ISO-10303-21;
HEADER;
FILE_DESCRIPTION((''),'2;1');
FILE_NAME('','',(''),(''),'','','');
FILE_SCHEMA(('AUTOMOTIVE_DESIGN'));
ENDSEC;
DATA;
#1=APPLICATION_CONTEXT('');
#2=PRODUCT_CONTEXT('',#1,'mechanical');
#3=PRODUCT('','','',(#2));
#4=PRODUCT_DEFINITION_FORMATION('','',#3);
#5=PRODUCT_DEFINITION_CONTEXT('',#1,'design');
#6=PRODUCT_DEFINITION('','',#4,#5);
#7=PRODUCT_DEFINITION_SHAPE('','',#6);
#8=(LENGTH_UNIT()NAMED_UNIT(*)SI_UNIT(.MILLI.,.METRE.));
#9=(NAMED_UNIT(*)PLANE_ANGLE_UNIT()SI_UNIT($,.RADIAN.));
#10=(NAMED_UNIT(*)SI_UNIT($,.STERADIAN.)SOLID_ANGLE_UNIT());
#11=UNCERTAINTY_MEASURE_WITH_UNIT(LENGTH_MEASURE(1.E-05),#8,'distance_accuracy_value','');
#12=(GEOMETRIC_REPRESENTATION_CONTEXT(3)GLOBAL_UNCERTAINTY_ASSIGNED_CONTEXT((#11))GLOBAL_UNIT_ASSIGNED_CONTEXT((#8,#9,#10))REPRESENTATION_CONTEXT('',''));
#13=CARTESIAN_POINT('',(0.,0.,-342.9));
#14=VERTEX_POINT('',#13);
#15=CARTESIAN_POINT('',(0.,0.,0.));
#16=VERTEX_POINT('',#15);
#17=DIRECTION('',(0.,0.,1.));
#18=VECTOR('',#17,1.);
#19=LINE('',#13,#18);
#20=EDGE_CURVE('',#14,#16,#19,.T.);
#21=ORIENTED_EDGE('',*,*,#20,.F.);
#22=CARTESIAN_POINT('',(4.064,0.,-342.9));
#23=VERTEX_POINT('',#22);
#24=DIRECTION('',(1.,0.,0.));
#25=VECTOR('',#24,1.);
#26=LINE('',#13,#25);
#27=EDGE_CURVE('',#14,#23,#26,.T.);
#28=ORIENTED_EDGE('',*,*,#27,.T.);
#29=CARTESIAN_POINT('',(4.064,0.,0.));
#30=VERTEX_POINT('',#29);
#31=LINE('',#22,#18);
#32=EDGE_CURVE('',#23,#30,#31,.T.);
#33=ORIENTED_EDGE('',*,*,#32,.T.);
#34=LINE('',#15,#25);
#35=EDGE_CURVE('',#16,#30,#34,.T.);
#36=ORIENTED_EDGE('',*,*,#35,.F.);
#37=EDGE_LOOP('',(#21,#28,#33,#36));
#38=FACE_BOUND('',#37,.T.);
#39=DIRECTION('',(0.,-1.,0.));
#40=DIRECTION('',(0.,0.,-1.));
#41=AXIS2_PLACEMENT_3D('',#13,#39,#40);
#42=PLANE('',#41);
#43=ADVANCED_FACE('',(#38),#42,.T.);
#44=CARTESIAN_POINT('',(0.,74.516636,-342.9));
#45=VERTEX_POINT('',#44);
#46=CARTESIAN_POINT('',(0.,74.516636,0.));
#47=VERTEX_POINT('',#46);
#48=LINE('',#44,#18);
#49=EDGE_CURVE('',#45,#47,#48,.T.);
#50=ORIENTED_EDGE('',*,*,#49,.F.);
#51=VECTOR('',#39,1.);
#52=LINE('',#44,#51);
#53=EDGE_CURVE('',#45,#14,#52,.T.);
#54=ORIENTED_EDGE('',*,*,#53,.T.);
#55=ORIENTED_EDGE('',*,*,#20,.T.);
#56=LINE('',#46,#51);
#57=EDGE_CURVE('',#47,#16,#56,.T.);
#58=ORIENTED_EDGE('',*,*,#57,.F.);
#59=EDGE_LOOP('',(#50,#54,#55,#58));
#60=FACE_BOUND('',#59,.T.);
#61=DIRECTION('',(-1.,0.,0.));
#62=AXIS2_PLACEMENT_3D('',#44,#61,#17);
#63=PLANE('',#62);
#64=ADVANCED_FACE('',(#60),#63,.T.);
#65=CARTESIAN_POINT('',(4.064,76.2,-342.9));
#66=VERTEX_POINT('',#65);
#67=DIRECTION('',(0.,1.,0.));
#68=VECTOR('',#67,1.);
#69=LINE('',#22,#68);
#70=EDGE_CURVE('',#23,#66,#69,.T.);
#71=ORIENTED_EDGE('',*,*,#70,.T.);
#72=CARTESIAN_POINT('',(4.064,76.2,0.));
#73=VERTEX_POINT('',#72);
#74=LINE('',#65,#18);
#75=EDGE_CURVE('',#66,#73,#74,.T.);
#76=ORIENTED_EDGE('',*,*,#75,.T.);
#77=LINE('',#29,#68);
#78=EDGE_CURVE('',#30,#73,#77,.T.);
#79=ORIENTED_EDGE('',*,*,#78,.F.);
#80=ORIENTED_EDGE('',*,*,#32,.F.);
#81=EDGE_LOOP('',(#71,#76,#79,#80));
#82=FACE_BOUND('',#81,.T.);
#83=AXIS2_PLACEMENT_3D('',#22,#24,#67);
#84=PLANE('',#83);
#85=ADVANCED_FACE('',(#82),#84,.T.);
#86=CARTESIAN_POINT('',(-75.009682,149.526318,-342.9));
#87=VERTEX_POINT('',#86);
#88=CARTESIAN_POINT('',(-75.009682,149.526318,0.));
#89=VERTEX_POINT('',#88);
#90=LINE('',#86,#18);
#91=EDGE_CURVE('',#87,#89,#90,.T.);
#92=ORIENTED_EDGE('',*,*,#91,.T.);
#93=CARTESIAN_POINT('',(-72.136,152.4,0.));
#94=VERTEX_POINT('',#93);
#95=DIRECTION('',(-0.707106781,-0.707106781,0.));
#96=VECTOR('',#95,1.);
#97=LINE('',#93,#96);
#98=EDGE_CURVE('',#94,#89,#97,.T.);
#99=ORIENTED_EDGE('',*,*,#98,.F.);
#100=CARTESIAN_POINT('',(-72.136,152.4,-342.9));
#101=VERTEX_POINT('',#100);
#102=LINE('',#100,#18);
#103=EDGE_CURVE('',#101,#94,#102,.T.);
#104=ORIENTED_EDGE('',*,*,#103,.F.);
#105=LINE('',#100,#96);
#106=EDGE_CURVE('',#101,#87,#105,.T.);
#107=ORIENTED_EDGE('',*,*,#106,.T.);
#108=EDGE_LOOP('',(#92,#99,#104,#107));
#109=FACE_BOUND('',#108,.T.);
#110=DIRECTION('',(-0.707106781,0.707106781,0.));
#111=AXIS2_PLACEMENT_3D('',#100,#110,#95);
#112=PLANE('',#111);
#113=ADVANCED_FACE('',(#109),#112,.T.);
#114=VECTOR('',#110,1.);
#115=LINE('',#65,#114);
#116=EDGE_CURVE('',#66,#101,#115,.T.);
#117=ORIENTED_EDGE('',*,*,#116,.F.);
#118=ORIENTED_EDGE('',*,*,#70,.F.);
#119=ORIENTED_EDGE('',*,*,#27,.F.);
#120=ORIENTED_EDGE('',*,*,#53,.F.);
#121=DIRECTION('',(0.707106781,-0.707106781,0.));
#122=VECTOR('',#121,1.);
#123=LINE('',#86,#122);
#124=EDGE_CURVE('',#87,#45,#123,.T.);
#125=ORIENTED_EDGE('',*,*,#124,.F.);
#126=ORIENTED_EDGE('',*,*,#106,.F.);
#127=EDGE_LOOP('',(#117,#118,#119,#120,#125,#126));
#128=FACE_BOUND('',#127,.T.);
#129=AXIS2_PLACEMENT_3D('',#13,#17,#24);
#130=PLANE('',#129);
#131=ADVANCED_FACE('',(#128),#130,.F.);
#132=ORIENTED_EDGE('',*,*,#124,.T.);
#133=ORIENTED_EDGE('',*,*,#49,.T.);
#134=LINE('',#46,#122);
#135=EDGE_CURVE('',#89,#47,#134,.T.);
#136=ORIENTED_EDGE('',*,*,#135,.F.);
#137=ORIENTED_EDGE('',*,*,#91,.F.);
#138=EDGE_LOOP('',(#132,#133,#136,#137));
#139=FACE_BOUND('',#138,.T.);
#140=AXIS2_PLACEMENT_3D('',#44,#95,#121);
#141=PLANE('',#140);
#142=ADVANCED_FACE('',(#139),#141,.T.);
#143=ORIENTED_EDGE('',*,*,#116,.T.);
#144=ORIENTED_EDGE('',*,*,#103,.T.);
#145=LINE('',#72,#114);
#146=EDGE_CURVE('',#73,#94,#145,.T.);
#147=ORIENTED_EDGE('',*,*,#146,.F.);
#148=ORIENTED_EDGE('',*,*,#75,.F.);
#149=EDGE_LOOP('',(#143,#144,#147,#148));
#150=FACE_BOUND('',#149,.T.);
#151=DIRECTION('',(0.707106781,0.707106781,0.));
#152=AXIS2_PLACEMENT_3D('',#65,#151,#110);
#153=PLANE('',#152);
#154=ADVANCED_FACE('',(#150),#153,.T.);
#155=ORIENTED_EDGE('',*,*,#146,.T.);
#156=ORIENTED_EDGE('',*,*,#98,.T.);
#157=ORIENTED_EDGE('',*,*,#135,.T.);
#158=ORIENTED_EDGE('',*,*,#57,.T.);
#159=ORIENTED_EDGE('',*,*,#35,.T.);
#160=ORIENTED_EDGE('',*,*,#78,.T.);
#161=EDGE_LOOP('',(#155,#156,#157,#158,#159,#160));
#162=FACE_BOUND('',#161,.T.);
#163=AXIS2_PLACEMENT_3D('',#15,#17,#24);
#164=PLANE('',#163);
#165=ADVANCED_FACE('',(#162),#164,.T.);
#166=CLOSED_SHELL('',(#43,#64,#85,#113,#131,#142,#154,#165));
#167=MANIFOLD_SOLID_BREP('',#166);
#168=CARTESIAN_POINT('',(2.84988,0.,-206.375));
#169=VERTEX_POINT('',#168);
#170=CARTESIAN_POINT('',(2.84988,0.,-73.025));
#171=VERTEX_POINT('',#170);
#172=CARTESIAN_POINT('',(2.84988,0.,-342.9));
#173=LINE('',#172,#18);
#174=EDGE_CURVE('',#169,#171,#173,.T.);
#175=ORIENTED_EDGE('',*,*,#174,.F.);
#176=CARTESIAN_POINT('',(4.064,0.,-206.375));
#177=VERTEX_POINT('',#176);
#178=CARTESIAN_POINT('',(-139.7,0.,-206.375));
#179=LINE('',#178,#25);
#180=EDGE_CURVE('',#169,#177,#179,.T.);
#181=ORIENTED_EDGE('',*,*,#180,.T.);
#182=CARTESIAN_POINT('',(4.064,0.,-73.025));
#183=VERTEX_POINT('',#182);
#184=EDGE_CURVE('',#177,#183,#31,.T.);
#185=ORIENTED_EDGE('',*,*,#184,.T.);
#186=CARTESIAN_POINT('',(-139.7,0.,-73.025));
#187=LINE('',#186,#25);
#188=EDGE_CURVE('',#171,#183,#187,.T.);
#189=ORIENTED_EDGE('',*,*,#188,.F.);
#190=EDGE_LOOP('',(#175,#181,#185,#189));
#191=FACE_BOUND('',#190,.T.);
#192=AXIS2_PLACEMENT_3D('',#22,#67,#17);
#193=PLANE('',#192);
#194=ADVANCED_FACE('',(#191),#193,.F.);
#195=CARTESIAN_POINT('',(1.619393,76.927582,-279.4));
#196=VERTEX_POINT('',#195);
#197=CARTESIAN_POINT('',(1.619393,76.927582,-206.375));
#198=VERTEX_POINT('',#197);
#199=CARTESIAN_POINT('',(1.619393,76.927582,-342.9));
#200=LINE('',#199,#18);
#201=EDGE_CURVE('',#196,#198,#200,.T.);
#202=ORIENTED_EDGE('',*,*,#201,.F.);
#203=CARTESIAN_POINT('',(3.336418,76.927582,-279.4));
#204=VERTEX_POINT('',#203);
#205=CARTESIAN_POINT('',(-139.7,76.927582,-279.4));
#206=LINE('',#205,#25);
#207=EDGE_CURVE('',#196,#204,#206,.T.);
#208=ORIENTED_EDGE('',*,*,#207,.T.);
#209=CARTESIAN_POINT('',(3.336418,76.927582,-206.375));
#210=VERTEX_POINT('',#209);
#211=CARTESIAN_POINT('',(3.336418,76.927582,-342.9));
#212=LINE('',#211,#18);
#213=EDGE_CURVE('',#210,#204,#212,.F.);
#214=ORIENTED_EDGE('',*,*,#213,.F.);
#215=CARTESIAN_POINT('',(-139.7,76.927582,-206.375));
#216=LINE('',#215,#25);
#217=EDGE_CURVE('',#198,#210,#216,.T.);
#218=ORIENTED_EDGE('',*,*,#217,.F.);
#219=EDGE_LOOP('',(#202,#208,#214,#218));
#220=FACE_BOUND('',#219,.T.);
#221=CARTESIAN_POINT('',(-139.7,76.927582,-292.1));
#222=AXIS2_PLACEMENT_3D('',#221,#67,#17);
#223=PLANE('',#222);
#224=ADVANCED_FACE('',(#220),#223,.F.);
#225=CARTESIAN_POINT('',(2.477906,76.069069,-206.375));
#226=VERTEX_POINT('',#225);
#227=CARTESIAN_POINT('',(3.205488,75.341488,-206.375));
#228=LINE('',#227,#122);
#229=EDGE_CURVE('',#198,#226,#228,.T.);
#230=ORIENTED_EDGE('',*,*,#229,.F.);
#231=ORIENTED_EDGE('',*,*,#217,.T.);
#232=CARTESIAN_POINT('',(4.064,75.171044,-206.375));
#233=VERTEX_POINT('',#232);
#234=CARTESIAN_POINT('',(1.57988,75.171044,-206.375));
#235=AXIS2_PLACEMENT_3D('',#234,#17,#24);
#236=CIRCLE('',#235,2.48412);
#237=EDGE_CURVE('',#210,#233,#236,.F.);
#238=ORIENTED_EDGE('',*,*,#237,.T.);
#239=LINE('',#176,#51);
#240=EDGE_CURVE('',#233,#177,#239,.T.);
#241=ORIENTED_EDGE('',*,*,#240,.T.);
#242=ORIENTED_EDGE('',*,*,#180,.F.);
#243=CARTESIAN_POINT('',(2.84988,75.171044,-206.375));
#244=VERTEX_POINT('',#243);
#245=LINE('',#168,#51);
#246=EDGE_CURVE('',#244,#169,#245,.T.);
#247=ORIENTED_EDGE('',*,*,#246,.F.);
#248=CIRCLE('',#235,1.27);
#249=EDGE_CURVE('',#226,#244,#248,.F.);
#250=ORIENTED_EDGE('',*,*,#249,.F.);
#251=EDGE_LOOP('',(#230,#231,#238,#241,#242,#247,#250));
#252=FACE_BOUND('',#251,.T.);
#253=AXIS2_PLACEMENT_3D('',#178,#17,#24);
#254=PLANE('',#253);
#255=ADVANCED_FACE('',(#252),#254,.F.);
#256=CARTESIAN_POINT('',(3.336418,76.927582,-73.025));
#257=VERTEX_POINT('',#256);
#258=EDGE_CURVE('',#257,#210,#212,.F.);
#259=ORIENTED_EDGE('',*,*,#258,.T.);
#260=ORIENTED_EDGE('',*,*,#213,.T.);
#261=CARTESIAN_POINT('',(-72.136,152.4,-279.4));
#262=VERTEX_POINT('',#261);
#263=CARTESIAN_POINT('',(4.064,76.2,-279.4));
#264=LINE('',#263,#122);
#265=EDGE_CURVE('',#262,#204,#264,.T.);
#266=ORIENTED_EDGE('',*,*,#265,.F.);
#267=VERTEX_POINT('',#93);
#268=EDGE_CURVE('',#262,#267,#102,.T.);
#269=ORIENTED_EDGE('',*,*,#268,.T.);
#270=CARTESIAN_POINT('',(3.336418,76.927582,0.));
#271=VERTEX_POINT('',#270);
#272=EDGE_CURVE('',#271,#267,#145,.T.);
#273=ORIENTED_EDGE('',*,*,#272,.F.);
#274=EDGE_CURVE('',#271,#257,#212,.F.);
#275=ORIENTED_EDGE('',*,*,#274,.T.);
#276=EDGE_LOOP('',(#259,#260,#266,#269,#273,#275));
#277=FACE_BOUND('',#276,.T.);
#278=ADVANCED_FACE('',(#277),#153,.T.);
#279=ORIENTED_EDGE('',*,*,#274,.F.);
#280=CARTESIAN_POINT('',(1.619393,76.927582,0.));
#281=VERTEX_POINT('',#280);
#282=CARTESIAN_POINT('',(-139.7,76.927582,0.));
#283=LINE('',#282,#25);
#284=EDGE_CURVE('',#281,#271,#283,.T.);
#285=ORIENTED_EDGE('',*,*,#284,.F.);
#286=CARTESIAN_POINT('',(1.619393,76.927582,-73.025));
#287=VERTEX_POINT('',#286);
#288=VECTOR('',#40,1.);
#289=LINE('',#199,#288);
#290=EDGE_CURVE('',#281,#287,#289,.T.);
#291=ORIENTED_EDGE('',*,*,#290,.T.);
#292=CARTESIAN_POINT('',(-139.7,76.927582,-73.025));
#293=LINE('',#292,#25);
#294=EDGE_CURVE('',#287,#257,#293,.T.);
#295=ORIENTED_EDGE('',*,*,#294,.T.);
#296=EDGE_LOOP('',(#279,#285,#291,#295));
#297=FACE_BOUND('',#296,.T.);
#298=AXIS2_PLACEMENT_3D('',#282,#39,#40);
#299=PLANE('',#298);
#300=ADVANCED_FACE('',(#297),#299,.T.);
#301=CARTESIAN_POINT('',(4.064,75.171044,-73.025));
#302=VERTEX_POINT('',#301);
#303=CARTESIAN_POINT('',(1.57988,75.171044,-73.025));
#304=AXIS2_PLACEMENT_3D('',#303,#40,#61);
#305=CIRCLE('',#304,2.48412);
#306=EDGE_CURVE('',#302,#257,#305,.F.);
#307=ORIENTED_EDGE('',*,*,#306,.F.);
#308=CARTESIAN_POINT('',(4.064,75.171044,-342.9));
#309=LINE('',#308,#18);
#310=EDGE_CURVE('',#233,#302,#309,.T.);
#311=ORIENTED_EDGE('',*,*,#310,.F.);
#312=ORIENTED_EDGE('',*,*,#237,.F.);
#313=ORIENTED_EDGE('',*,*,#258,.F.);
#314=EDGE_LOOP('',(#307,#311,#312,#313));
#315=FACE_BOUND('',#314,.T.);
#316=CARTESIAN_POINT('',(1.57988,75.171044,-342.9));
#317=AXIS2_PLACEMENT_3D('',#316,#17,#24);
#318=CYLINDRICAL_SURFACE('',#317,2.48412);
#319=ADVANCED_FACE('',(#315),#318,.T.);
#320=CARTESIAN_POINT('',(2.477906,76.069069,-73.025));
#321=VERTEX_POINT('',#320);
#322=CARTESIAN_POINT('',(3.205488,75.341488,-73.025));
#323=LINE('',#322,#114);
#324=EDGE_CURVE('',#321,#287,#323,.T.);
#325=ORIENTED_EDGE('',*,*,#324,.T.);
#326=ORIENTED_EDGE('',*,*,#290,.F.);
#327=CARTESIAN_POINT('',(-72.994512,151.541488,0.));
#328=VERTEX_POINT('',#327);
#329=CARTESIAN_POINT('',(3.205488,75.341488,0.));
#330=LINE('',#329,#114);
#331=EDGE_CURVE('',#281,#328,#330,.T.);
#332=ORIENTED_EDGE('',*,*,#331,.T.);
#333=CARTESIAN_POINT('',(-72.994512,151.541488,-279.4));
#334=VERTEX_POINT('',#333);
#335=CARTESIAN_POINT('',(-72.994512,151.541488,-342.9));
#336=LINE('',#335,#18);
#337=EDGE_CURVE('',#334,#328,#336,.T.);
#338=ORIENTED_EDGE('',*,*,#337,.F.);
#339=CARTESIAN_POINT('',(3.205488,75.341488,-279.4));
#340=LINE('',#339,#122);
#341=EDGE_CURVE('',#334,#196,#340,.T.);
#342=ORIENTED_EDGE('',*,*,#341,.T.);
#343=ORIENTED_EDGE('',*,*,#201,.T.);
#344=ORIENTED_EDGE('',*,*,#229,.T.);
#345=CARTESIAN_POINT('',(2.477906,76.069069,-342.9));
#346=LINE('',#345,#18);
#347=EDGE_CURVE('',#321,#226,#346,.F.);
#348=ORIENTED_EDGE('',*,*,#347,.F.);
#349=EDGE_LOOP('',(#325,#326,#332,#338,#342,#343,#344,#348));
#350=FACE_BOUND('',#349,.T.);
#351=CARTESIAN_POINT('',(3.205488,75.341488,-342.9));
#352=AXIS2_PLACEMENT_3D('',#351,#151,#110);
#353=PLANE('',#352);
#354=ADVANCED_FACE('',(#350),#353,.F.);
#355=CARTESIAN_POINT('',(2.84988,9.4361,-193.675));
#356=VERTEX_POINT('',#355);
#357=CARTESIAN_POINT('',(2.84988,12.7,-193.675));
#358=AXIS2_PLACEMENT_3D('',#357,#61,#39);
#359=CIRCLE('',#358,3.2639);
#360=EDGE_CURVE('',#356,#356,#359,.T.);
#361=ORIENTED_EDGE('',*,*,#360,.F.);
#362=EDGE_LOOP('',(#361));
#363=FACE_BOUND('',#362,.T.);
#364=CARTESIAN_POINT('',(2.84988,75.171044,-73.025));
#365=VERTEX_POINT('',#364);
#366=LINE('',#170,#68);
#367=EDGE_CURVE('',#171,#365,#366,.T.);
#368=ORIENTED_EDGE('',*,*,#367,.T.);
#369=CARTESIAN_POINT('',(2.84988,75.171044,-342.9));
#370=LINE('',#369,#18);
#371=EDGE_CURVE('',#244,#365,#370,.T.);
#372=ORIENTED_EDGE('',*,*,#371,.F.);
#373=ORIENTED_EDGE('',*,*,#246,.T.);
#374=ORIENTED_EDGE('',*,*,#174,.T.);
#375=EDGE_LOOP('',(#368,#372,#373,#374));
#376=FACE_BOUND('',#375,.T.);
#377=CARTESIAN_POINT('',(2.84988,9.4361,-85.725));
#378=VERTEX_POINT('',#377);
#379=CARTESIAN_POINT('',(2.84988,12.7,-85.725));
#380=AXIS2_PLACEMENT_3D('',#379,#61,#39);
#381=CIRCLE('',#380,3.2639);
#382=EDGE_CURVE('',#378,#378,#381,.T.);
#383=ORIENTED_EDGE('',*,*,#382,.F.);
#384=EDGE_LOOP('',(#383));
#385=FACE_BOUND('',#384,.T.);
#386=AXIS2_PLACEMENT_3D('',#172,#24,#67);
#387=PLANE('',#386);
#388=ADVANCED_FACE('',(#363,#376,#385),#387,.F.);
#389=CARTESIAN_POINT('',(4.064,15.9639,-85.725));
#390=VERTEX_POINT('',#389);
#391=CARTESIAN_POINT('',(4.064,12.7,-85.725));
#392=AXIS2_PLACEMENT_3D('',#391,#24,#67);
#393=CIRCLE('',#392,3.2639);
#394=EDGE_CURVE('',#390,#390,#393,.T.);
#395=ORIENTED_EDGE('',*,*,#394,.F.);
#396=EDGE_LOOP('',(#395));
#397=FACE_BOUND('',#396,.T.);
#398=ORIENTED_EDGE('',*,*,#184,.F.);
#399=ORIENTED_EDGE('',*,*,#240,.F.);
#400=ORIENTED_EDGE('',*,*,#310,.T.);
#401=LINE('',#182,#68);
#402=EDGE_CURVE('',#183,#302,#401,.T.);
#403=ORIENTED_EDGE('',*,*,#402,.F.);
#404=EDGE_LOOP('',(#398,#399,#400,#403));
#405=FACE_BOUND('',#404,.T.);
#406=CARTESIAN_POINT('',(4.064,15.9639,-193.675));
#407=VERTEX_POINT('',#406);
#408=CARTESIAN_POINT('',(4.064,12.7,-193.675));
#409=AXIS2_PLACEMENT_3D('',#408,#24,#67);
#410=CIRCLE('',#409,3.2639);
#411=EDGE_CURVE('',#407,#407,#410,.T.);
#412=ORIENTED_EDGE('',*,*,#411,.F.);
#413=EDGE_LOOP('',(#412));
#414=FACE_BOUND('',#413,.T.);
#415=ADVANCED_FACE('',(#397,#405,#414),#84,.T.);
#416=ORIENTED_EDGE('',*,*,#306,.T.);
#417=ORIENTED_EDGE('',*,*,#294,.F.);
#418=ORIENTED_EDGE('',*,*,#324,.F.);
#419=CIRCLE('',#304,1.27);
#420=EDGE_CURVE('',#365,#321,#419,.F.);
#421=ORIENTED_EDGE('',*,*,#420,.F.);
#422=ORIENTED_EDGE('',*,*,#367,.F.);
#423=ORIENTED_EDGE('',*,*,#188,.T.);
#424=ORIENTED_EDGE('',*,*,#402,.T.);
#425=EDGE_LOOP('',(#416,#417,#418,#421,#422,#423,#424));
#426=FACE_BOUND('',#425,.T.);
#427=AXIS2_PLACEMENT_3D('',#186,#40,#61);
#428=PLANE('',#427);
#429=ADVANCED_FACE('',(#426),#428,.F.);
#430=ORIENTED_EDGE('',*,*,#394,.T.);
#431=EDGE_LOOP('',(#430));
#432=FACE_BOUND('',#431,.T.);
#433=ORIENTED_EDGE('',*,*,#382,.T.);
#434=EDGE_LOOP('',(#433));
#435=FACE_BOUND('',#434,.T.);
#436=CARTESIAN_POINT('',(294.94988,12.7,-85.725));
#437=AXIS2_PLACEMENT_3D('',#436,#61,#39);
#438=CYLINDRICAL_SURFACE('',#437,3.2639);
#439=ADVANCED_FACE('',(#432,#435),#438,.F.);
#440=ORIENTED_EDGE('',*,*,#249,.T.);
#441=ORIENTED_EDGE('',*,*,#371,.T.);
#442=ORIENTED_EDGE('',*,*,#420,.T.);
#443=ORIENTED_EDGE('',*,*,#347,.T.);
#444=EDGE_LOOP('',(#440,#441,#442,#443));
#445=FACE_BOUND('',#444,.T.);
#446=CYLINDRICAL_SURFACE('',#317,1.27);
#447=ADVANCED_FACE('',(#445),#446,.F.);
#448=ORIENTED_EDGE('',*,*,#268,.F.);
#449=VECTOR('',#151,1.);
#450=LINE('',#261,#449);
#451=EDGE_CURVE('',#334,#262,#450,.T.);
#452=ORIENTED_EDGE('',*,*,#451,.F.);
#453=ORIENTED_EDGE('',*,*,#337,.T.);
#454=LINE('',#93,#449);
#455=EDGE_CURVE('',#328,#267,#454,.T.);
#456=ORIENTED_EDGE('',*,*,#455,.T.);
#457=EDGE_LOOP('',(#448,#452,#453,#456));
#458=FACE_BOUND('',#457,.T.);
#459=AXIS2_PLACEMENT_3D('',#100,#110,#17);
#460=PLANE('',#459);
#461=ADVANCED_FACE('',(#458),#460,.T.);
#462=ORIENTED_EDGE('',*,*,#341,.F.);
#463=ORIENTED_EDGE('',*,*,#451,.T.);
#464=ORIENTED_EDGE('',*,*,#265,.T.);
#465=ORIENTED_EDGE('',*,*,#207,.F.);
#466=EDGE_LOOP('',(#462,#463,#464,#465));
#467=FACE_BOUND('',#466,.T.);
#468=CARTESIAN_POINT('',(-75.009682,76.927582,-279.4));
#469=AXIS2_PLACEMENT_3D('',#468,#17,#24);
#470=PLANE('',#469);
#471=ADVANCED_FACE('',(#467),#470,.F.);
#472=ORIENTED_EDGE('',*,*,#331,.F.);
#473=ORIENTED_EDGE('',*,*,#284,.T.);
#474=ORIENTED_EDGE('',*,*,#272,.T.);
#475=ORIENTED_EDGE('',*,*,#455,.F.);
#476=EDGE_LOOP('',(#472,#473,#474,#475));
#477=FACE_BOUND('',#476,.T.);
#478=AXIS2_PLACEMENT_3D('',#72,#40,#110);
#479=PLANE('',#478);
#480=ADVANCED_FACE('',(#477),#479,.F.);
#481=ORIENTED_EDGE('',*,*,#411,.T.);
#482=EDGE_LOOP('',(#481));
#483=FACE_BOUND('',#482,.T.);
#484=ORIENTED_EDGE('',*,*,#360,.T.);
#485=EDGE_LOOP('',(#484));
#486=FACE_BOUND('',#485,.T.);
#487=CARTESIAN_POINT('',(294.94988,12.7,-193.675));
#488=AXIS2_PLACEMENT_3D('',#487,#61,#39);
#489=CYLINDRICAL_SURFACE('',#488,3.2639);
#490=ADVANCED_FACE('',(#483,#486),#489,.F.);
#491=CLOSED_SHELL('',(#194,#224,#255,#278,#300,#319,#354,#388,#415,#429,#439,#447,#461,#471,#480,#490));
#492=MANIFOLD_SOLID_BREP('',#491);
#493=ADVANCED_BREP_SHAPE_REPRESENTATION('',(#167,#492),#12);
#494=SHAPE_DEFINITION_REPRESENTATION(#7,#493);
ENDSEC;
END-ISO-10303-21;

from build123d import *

# Parameters (mm, degrees)
BOSS_EXTRUDE2_DEPTH  = 342.9
CONVERT_SOLID2_START = -342.9
CONVERT_SOLID2_DEPTH = 342.9
SKETCH12_W           = 73.025
SKETCH12_H           = 76.927581903
CUT_EXTRUDE1_DEPTH   = 292.1
SKETCH13_W           = 85.725
SKETCH13_H           = 76.927581903
CUT_EXTRUDE2_DEPTH   = 292.1
SKETCH14_R           = 3.2639
CUT_EXTRUDE3_DEPTH   = 292.1
SKETCH18_W           = 50.8
SKETCH18_H           = 76.927581903
CUT_EXTRUDE4_DEPTH   = 439.772530417
SKETCH21_W           = 63.5
SKETCH21_H           = 100.852216804
CUT_EXTRUDE11_DEPTH  = 439.772530417


# Read off the part's stored shape, not the designer's step: Convert-Solid2
with BuildPart() as part:
    # Sketch7 → Boss-Extrude2 (new body)
    with BuildSketch(Plane.XY):
        Polygon((0, 0), (4.064, 0), (4.064, 76.2), (-72.136, 152.4), (-75.009681959, 149.526318041), (-74.603697881, 149.120333963), (0, 74.516636083), align=None)
    extrude(amount=-BOSS_EXTRUDE2_DEPTH)


with BuildPart() as body_2:
    # Convert-Solid2 outline → Convert-Solid2 (new body)
    with BuildSketch(Plane.XY.offset(CONVERT_SOLID2_START)):
        with BuildLine():
            Line((2.84988, 0), (4.064, 0))
            Line((4.064, 0), (4.064, 75.171043805))
            ThreePointArc((4.064, 75.171043805), (3.874907624, 76.121675373), (3.336418097, 76.927581903))
            Line((3.336418097, 76.927581903), (-72.136, 152.4))
            Line((-72.136, 152.4), (-72.994512485, 151.541487515))
            Line((-72.994512485, 151.541487515), (2.477905612, 76.069069418))
            ThreePointArc((2.477905612, 76.069069418), (2.753207006, 75.657051765), (2.84988, 75.171043805))
            Line((2.84988, 75.171043805), (2.84988, 0))
        make_face()
    extrude(amount=CONVERT_SOLID2_DEPTH)

    # Sketch12 → Cut-Extrude1 (cut)
    with BuildSketch(Plane(origin=(152.4, 0, 0), x_dir=(0, 0, -1), z_dir=(1, 0, 0))):
        with Locations((36.5125, 38.463790952)):
            Rectangle(SKETCH12_W, SKETCH12_H)
    extrude(amount=-CUT_EXTRUDE1_DEPTH, mode=Mode.SUBTRACT)

    # Sketch13 → Cut-Extrude2 (cut)
    with BuildSketch(Plane(origin=(152.4, 0, 0), x_dir=(0, 0, -1), z_dir=(1, 0, 0))):
        with Locations((249.2375, 38.463790952)):
            Rectangle(SKETCH13_W, SKETCH13_H)
    extrude(amount=-CUT_EXTRUDE2_DEPTH, mode=Mode.SUBTRACT)

    # Sketch14 → Cut-Extrude3 (cut)
    with BuildSketch(Plane.ZY.offset(-2.84988)):
        with Locations(Location((-193.675, 12.7, 0), (0, 0, 270))):
            Circle(SKETCH14_R)
        with Locations(Location((-85.725, 12.7, 0), (0, 0, 270))):
            Circle(SKETCH14_R)
    extrude(amount=-CUT_EXTRUDE3_DEPTH, mode=Mode.SUBTRACT)

    # Sketch18 → Cut-Extrude4 (cut, through all)
    with BuildSketch(Plane(origin=(152.4, 0, 0), x_dir=(0, 0, -1), z_dir=(1, 0, 0))):
        with Locations((317.5, 38.463790952)):
            Rectangle(SKETCH18_W, SKETCH18_H)
    extrude(amount=-CUT_EXTRUDE4_DEPTH, mode=Mode.SUBTRACT)

    # Sketch21 → Cut-Extrude11 (cut, through all)
    with BuildSketch(Plane(origin=(152.4, 0, 0), x_dir=(0, 0, -1), z_dir=(1, 0, 0))):
        with Locations((311.15, 127.353690305)):
            Rectangle(SKETCH21_W, SKETCH21_H)
    extrude(amount=-CUT_EXTRUDE11_DEPTH, mode=Mode.SUBTRACT)


solid = Compound([part.part, body_2.part])
